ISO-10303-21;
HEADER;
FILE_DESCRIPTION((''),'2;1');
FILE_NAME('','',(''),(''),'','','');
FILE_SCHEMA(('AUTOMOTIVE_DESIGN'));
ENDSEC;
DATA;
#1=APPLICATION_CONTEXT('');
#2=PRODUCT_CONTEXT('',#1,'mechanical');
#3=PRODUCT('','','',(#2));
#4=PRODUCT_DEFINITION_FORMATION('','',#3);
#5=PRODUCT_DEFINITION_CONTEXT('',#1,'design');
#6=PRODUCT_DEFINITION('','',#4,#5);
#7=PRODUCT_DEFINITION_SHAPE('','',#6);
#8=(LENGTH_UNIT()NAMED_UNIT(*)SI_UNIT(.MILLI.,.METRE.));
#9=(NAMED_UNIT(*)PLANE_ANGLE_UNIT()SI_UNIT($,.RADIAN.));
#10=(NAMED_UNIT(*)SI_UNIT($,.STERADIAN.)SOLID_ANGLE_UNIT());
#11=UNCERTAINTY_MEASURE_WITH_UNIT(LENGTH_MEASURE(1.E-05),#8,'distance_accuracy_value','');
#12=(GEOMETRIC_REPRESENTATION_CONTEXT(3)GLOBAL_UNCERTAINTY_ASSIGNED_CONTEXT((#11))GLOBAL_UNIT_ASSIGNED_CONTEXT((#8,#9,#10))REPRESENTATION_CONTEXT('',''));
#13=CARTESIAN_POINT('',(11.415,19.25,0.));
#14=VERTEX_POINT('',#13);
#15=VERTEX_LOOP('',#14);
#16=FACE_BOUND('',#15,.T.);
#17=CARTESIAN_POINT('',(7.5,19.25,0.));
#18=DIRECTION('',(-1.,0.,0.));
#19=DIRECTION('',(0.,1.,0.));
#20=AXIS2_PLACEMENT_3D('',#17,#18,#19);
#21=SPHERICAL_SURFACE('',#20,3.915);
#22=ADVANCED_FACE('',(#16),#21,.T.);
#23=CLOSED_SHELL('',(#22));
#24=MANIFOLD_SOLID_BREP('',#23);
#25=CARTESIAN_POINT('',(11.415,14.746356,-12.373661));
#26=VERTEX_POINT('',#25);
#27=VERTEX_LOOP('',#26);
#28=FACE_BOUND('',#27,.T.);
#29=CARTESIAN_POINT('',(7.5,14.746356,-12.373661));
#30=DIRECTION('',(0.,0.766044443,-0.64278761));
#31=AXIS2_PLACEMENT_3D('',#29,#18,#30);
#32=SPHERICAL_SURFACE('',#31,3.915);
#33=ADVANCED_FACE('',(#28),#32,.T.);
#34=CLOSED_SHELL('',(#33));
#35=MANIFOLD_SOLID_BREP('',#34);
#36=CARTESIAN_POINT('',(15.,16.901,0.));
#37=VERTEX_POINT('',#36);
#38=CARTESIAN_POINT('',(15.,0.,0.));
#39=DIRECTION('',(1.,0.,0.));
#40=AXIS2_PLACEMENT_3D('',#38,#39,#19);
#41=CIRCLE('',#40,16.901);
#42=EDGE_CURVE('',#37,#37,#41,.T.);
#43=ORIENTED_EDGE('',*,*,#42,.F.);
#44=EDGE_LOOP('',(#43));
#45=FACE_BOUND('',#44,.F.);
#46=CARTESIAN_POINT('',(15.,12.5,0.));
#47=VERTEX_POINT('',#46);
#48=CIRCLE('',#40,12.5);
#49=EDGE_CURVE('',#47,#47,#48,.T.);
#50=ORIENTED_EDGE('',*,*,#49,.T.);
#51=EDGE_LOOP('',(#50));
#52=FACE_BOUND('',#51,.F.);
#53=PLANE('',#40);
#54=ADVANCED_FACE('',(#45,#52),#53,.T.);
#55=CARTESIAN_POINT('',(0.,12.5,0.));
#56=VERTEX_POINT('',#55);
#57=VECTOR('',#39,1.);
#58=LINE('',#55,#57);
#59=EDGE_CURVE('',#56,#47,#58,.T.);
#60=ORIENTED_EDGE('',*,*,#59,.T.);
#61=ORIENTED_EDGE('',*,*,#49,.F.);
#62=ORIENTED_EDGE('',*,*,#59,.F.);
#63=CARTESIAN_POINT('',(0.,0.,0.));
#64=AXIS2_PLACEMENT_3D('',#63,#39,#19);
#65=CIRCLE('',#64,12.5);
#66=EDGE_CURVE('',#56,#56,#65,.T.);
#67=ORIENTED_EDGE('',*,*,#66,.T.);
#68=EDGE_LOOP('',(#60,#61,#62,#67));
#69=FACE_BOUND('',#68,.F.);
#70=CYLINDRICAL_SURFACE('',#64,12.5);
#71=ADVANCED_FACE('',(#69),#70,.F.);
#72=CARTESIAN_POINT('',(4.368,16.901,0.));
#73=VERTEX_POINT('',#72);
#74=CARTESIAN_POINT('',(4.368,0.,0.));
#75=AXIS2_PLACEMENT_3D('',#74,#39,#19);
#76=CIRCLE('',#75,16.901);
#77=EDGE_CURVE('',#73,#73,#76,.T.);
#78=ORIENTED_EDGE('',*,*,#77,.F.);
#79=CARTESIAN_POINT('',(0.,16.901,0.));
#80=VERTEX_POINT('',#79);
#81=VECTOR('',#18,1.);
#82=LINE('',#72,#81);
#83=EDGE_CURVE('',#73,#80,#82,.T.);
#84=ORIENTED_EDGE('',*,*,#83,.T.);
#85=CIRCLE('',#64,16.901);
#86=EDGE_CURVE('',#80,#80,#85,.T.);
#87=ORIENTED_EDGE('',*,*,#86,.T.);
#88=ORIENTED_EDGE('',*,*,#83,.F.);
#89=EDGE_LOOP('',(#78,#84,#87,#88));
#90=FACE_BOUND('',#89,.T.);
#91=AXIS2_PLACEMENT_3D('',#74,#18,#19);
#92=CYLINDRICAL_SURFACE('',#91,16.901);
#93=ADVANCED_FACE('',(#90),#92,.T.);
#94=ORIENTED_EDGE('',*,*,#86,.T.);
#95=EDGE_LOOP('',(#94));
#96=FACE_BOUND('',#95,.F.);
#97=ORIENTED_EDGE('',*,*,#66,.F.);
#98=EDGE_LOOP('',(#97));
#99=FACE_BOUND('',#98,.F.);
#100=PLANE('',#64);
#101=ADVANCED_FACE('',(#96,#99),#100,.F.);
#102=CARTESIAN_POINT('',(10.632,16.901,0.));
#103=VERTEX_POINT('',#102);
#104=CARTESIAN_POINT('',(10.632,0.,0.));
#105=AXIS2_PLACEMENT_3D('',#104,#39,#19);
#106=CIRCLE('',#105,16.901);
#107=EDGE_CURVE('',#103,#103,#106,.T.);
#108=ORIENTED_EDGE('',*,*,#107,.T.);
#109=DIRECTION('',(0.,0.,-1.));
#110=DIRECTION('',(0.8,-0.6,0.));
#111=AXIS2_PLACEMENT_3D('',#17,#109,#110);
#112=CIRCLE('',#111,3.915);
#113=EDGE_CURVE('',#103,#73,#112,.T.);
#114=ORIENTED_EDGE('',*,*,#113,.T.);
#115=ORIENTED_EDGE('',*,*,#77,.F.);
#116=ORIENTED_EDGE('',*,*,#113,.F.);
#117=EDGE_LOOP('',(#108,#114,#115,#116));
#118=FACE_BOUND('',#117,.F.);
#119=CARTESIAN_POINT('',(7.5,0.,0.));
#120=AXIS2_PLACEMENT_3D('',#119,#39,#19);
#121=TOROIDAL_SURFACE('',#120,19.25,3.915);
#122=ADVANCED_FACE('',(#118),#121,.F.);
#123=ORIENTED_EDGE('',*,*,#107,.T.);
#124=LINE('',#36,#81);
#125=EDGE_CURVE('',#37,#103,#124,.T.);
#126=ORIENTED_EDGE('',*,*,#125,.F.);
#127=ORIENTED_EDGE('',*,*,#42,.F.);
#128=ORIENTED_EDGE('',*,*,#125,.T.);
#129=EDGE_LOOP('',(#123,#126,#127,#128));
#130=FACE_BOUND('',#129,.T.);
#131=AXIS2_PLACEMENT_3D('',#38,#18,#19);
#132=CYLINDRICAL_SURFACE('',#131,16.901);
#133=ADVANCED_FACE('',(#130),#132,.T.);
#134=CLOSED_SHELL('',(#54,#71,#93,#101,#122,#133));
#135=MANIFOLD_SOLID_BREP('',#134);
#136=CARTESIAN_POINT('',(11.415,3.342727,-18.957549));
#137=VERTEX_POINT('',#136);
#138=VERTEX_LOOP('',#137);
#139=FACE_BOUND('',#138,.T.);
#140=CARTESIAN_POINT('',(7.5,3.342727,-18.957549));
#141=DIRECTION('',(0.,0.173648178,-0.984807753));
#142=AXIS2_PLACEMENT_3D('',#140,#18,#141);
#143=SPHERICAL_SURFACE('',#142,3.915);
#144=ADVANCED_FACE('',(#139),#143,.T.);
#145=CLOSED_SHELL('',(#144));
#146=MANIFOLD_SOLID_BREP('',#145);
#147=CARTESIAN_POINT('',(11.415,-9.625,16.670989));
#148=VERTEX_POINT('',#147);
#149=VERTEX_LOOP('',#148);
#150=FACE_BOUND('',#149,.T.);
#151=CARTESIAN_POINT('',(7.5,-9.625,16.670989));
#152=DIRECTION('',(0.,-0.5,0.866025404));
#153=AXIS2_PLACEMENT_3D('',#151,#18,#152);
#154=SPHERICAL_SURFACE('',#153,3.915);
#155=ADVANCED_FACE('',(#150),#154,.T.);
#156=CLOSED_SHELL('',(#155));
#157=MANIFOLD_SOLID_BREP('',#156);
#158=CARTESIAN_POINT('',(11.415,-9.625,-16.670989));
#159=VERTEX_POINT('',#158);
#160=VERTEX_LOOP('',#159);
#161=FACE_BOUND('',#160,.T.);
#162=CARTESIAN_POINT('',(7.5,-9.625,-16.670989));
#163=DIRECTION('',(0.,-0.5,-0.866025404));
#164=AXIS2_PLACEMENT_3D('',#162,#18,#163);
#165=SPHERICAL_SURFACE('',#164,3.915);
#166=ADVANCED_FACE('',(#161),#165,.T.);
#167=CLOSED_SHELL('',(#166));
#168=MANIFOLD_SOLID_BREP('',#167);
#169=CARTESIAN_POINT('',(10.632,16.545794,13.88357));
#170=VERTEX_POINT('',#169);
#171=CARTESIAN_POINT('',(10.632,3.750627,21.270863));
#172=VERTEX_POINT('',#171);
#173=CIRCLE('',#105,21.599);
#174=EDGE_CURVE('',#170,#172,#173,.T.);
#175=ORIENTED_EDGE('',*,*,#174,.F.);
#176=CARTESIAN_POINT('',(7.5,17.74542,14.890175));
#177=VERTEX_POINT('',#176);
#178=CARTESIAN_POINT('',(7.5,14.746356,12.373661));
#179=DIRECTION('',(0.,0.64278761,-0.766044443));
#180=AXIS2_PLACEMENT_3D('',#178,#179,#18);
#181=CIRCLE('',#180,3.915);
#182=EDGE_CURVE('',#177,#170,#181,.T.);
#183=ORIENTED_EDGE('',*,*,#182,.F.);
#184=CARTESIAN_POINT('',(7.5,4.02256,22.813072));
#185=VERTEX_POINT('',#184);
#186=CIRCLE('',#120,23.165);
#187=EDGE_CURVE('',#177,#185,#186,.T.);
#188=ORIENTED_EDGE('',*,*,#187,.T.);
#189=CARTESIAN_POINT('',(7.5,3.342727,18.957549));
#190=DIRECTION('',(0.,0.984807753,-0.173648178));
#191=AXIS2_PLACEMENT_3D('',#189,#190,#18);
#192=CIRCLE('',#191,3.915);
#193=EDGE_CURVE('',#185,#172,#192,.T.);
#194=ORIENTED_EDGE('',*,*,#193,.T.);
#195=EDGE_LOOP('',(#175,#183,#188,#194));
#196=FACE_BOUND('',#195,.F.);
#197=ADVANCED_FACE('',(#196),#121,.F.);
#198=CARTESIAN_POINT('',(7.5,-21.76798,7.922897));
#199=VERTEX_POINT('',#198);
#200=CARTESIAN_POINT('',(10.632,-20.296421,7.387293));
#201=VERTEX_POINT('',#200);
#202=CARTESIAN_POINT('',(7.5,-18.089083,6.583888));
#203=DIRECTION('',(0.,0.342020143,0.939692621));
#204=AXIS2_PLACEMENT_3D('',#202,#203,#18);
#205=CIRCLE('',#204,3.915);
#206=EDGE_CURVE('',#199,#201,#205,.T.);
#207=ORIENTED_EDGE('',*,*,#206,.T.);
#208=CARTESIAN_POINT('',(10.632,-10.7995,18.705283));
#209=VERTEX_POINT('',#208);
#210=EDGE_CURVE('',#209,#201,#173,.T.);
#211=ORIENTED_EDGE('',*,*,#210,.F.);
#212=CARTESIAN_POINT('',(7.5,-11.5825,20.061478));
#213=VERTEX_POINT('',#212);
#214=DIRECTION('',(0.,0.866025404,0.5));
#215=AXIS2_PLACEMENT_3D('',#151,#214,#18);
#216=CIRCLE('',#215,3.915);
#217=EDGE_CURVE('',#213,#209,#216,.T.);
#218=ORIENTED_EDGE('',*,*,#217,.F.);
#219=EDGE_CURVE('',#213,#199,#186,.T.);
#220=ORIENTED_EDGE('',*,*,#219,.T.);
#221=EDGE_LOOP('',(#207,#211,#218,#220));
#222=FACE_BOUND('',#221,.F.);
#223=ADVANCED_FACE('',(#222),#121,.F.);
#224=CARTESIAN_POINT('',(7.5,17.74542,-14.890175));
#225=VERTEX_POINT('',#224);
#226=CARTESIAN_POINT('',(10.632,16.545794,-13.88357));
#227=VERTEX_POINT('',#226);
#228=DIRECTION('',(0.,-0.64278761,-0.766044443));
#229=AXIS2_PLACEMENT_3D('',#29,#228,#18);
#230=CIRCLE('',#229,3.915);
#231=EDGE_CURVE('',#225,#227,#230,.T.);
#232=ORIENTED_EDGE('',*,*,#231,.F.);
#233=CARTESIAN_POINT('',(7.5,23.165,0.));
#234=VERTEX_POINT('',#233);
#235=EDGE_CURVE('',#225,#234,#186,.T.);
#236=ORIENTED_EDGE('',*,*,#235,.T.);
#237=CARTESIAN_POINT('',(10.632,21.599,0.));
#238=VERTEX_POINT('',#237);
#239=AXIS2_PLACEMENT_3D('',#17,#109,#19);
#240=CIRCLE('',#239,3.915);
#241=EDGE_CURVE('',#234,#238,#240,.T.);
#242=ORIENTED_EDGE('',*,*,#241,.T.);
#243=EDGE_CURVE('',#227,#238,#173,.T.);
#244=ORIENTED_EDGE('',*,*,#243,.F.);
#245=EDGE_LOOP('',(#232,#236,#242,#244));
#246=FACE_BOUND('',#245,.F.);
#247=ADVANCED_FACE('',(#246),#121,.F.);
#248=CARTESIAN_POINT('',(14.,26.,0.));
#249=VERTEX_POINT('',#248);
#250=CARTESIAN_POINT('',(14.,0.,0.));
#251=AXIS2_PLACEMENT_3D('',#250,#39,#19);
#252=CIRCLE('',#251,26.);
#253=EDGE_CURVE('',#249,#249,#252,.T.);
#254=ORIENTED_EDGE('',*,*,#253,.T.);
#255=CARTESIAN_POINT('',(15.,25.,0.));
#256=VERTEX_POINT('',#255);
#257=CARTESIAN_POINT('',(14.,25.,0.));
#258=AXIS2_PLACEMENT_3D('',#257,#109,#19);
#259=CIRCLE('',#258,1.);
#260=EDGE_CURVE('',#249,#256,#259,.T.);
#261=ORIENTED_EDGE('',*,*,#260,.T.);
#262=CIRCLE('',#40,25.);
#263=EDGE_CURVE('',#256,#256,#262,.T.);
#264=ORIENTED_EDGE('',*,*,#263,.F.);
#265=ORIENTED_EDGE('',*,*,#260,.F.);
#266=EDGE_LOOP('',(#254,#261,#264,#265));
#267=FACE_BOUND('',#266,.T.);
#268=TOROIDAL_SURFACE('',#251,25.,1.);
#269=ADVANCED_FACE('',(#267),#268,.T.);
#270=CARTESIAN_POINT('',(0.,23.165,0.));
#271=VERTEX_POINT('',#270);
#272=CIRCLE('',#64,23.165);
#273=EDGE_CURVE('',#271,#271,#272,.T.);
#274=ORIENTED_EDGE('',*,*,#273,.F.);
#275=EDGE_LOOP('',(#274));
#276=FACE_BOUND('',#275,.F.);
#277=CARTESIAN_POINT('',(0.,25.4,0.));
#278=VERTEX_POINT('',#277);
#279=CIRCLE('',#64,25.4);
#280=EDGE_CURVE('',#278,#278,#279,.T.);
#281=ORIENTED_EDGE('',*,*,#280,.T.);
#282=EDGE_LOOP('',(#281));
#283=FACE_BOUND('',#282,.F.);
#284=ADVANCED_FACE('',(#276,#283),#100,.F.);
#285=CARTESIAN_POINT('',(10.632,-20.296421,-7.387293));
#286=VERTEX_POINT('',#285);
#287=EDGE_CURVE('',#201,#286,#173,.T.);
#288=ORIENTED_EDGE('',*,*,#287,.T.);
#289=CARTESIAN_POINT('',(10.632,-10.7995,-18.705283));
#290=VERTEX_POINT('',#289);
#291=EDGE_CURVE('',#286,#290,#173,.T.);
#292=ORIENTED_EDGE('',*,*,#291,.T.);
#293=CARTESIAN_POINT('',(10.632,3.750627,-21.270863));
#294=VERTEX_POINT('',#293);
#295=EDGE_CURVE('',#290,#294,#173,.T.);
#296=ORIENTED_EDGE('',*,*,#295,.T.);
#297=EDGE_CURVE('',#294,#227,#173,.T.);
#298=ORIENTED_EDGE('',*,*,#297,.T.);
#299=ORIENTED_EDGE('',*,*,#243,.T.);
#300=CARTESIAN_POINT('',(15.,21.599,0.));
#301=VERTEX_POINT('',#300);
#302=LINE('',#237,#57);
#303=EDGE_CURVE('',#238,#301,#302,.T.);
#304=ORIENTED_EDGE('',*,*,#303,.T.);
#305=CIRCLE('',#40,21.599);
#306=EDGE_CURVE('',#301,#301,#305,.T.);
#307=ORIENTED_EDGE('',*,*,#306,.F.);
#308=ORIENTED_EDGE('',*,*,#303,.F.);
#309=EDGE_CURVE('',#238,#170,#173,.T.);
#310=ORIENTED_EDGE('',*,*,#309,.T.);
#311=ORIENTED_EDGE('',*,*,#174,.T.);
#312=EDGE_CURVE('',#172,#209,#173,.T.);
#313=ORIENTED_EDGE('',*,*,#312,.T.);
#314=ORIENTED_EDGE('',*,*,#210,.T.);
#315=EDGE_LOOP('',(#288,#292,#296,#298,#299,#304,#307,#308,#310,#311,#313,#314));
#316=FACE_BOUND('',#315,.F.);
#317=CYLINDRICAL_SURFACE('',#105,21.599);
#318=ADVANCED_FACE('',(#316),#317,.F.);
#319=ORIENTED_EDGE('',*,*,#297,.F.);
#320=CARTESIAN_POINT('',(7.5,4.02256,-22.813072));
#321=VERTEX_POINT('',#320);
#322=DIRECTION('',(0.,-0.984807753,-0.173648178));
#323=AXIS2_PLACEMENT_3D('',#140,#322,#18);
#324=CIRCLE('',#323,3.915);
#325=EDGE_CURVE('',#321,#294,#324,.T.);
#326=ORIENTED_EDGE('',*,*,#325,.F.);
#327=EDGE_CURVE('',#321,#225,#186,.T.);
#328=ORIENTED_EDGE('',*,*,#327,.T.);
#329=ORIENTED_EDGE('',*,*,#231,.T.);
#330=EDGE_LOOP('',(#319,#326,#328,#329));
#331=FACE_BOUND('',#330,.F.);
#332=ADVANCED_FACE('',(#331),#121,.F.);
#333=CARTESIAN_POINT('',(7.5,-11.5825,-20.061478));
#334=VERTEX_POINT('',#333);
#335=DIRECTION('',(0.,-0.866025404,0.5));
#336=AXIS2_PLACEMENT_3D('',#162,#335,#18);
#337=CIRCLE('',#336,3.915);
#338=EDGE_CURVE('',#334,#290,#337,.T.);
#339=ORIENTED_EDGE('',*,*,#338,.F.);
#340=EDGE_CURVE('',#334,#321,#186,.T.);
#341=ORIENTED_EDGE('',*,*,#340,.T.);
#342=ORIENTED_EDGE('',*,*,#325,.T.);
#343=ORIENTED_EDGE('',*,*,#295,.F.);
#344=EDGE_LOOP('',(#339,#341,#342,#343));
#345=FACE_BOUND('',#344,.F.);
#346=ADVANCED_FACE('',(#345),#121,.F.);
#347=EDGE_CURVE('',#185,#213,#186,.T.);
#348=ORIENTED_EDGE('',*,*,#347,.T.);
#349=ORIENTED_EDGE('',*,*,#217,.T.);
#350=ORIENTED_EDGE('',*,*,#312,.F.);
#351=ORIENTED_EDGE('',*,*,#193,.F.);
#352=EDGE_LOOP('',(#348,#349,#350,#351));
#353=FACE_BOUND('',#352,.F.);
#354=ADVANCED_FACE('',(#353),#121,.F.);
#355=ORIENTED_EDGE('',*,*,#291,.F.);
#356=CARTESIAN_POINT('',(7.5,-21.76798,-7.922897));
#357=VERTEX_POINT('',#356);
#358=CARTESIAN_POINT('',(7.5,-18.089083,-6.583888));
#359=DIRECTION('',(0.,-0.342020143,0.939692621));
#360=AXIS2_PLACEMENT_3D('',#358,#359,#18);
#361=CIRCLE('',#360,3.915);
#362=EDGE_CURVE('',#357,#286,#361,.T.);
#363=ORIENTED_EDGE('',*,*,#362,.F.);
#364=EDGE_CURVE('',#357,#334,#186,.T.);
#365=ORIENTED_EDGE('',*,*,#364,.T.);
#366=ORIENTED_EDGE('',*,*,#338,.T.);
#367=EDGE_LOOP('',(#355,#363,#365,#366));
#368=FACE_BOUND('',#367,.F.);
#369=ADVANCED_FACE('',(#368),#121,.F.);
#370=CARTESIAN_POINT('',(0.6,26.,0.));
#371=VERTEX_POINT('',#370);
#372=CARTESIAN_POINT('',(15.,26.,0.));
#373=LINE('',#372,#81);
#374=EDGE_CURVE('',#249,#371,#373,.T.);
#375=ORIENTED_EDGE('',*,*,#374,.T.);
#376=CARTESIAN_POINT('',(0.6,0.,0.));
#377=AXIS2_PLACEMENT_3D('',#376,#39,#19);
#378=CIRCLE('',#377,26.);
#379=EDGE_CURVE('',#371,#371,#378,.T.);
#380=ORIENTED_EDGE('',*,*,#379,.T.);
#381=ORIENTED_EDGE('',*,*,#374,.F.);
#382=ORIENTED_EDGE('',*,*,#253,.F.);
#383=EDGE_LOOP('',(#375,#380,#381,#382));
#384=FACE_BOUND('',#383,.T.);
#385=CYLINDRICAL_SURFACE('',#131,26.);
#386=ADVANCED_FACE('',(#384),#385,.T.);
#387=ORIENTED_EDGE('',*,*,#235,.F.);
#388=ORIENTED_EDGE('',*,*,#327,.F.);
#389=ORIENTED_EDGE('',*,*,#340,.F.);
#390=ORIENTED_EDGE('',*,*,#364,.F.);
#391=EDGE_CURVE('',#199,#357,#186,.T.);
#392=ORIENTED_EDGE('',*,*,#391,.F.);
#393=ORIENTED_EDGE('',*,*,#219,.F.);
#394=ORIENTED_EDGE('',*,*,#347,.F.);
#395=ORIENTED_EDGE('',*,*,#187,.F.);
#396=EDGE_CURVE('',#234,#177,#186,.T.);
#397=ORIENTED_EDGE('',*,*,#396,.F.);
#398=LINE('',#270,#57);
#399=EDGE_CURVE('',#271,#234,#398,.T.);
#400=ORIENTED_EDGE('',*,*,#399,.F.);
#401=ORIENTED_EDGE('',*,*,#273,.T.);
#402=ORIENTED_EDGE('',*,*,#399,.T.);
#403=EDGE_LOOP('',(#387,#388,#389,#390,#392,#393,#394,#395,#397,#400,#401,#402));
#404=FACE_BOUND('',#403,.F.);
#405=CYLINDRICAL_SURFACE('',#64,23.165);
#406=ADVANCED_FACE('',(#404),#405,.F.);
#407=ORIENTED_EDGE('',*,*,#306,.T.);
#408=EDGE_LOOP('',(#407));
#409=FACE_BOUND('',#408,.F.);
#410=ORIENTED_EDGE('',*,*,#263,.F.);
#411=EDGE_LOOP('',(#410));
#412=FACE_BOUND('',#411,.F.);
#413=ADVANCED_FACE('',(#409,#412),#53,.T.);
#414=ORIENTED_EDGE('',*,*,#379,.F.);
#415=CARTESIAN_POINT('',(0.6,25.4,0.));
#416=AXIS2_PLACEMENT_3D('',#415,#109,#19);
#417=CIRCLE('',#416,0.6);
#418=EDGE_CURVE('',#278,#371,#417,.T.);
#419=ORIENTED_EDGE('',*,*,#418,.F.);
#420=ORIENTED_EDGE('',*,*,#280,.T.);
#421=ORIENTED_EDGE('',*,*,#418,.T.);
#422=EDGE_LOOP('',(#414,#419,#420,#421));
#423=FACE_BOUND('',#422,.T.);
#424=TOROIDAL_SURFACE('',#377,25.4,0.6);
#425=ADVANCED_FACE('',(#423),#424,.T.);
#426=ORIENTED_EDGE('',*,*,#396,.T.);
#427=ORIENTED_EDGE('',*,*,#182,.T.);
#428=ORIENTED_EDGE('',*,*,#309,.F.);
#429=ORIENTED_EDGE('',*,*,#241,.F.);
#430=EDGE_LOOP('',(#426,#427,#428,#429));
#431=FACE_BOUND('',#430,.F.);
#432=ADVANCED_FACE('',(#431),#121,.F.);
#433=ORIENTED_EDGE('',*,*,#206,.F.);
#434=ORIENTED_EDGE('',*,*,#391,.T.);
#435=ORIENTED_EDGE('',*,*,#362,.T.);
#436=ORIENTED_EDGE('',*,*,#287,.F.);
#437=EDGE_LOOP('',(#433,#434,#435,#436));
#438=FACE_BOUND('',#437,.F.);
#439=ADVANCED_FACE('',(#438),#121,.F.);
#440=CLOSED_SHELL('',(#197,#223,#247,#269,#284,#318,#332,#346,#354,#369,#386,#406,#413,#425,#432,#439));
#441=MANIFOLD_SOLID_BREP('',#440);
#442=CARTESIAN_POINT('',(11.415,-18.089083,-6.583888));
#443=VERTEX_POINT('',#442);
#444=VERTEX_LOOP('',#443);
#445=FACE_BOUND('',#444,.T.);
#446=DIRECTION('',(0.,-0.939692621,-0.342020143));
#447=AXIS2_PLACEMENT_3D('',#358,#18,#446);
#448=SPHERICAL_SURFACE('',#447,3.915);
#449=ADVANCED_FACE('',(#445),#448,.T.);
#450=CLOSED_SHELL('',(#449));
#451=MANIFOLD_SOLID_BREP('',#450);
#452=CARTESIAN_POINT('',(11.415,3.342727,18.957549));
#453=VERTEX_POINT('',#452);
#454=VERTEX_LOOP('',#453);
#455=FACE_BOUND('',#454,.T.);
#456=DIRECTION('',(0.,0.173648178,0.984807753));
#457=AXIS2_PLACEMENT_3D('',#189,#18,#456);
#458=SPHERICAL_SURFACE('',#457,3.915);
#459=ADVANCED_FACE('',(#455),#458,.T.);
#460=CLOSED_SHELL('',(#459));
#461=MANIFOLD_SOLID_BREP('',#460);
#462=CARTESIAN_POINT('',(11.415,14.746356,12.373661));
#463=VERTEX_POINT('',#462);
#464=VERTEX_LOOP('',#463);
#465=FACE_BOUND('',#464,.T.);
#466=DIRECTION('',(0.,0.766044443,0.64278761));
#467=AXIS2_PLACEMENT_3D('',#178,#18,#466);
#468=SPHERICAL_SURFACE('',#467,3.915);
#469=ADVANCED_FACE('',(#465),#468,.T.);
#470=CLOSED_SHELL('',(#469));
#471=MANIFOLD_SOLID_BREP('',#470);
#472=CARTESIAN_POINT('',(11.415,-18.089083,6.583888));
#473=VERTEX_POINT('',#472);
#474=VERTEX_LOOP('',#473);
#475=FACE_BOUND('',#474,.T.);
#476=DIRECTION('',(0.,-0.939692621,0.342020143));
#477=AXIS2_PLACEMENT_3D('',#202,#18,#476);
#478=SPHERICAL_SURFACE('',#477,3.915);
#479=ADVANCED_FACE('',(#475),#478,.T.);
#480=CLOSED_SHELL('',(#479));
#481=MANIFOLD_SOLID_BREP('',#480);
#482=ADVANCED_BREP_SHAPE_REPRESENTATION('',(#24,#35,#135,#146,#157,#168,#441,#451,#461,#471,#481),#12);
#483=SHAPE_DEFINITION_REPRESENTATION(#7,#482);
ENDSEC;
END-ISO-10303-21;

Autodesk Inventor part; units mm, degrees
ref_plane "YZ Plane" through (0, 0, 0) normal (1, 0, 0) x (0, 1, 0)
ref_plane "XZ Plane" through (0, 0, 0) normal (0, 1, 0) x (-1, 0, 0)
ref_plane "XY Plane" through (0, 0, 0) normal (0, 0, 1) x (1, 0, 0)
sketch "Sketch" plane through (0, 0, 0) normal (0, 0, 1) x (1, 0, 0)
  circle A0 centre (7.5, 19.25) radius 3.915
  line L0 (3.585, 19.25) -> (11.415, 19.25)
  line L1 (4.368, 16.901) -> (0, 16.901)
  line L2 (10.632, 16.901) -> (15, 16.901)
  line L3 (7.5, 23.165) -> (0, 23.165)
  line L4 (0, 26) -> (15, 26)
  line L5 (0, 12.5) -> (15, 12.5)
  line L6 (15, 12.5) -> (15, 16.901)
  line L7 (10.632, 21.599) -> (15, 21.599)
  line L8 (15, 21.599) -> (15, 26)
  line L9 (7.5, 19.25) -> (7.5, 23.165)
  line L10 (7.5, 19.25) -> (7.5, 15.335)
  line L11 (-3.2, 0) -> (19.2, 0) projected
  line L12 (0, -2.6) -> (0, 17.35) projected
  dimension "d4" = 7.83
  dimension "d10" = 25
  dimension "d12" = 43.198
  dimension "d14" = 38.5
  dimension "d15" = 52
  dimension "d16" = 33.802
  dimension "d17" = 15
  dimension "d18" = 7.5
sketch "Sketch outline for Body" plane through (0, 0, 0) normal (0, 0, 1) x (1, 0, 0)
  line L0 (0, 23.165) -> (7.5, 23.165)
  line L1 (0, 26) -> (0, 23.165)
  line L2 (15, 26) -> (0, 26)
  line L3 (15, 21.599) -> (15, 26)
  line L4 (10.632, 21.599) -> (15, 21.599)
  arc A0 (7.5, 23.165) -> (10.632, 21.599) centre (7.5, 19.25) cw
  arc A1 (10.632, 16.901) -> (4.368, 16.901) centre (7.5, 19.25) cw
  line L5 (4.368, 16.901) -> (0, 16.901)
  line L6 (0, 16.901) -> (0, 12.5)
  line L7 (0, 12.5) -> (15, 12.5)
  line L8 (15, 12.5) -> (15, 16.901)
  line L9 (15, 16.901) -> (10.632, 16.901)
revolve "Body" add sketch "Sketch outline for Body" angle 360 about axis through (-10, 0, 0) along (1, 0, 0)
fillet "Fillet1" radius 1 1 edges at (15, -26, 0)
fillet "Fillet1" radius 0.6 1 edges at (0, -26, 0)
revolve "Ball" add sketch "Sketch" angle 360 about axis through (3.585, 19.25, 0) along (1, 0, 0) contours L0 L9 A0 | L0 A0 L9
pattern_circular "Balls" count 9 over 360 about axis through (-10, 0, 0) along (1, 0, 0) of "Ball"
equation "\"d4\" = DDB"
equation "\"d10\" = WD"
equation "\"d12\" = KAD1"
equation "\"d14\" = DDA"
equation "\"d15\" = BD"
equation "\"d16\" = KID1"
equation "\"d17\" = KB"
equation "\"d18\" = 0.5 * KB"
equation "\"d0\" = KR1S"
equation "\"d1\" = KR3S"
equation "\"WD\" = 25"
equation "\"BD\" = 52"
equation "\"KB\" = 15"
equation "\"KR1S\" = 1"
equation "\"KR3S\" = 0.6"
equation "\"KID1\" = 33.802"
equation "\"KAD1\" = 43.198"
equation "\"DDA\" = 38.5"
equation "\"DDB\" = 7.83"
equation "\"WR\" = 0.5 * WD"
equation "\"DDC\" = 29.33621"
equation "\"DBB\" = 46.33"
equation "\"DGA\" = 2.14286"
equation "\"BR\" = 0.5 * BD"
equation "\"BBA\" = 0"
properties part number "STN 02 4632 - L 25 25 x 52 x 15" material "Steel, Mild"
